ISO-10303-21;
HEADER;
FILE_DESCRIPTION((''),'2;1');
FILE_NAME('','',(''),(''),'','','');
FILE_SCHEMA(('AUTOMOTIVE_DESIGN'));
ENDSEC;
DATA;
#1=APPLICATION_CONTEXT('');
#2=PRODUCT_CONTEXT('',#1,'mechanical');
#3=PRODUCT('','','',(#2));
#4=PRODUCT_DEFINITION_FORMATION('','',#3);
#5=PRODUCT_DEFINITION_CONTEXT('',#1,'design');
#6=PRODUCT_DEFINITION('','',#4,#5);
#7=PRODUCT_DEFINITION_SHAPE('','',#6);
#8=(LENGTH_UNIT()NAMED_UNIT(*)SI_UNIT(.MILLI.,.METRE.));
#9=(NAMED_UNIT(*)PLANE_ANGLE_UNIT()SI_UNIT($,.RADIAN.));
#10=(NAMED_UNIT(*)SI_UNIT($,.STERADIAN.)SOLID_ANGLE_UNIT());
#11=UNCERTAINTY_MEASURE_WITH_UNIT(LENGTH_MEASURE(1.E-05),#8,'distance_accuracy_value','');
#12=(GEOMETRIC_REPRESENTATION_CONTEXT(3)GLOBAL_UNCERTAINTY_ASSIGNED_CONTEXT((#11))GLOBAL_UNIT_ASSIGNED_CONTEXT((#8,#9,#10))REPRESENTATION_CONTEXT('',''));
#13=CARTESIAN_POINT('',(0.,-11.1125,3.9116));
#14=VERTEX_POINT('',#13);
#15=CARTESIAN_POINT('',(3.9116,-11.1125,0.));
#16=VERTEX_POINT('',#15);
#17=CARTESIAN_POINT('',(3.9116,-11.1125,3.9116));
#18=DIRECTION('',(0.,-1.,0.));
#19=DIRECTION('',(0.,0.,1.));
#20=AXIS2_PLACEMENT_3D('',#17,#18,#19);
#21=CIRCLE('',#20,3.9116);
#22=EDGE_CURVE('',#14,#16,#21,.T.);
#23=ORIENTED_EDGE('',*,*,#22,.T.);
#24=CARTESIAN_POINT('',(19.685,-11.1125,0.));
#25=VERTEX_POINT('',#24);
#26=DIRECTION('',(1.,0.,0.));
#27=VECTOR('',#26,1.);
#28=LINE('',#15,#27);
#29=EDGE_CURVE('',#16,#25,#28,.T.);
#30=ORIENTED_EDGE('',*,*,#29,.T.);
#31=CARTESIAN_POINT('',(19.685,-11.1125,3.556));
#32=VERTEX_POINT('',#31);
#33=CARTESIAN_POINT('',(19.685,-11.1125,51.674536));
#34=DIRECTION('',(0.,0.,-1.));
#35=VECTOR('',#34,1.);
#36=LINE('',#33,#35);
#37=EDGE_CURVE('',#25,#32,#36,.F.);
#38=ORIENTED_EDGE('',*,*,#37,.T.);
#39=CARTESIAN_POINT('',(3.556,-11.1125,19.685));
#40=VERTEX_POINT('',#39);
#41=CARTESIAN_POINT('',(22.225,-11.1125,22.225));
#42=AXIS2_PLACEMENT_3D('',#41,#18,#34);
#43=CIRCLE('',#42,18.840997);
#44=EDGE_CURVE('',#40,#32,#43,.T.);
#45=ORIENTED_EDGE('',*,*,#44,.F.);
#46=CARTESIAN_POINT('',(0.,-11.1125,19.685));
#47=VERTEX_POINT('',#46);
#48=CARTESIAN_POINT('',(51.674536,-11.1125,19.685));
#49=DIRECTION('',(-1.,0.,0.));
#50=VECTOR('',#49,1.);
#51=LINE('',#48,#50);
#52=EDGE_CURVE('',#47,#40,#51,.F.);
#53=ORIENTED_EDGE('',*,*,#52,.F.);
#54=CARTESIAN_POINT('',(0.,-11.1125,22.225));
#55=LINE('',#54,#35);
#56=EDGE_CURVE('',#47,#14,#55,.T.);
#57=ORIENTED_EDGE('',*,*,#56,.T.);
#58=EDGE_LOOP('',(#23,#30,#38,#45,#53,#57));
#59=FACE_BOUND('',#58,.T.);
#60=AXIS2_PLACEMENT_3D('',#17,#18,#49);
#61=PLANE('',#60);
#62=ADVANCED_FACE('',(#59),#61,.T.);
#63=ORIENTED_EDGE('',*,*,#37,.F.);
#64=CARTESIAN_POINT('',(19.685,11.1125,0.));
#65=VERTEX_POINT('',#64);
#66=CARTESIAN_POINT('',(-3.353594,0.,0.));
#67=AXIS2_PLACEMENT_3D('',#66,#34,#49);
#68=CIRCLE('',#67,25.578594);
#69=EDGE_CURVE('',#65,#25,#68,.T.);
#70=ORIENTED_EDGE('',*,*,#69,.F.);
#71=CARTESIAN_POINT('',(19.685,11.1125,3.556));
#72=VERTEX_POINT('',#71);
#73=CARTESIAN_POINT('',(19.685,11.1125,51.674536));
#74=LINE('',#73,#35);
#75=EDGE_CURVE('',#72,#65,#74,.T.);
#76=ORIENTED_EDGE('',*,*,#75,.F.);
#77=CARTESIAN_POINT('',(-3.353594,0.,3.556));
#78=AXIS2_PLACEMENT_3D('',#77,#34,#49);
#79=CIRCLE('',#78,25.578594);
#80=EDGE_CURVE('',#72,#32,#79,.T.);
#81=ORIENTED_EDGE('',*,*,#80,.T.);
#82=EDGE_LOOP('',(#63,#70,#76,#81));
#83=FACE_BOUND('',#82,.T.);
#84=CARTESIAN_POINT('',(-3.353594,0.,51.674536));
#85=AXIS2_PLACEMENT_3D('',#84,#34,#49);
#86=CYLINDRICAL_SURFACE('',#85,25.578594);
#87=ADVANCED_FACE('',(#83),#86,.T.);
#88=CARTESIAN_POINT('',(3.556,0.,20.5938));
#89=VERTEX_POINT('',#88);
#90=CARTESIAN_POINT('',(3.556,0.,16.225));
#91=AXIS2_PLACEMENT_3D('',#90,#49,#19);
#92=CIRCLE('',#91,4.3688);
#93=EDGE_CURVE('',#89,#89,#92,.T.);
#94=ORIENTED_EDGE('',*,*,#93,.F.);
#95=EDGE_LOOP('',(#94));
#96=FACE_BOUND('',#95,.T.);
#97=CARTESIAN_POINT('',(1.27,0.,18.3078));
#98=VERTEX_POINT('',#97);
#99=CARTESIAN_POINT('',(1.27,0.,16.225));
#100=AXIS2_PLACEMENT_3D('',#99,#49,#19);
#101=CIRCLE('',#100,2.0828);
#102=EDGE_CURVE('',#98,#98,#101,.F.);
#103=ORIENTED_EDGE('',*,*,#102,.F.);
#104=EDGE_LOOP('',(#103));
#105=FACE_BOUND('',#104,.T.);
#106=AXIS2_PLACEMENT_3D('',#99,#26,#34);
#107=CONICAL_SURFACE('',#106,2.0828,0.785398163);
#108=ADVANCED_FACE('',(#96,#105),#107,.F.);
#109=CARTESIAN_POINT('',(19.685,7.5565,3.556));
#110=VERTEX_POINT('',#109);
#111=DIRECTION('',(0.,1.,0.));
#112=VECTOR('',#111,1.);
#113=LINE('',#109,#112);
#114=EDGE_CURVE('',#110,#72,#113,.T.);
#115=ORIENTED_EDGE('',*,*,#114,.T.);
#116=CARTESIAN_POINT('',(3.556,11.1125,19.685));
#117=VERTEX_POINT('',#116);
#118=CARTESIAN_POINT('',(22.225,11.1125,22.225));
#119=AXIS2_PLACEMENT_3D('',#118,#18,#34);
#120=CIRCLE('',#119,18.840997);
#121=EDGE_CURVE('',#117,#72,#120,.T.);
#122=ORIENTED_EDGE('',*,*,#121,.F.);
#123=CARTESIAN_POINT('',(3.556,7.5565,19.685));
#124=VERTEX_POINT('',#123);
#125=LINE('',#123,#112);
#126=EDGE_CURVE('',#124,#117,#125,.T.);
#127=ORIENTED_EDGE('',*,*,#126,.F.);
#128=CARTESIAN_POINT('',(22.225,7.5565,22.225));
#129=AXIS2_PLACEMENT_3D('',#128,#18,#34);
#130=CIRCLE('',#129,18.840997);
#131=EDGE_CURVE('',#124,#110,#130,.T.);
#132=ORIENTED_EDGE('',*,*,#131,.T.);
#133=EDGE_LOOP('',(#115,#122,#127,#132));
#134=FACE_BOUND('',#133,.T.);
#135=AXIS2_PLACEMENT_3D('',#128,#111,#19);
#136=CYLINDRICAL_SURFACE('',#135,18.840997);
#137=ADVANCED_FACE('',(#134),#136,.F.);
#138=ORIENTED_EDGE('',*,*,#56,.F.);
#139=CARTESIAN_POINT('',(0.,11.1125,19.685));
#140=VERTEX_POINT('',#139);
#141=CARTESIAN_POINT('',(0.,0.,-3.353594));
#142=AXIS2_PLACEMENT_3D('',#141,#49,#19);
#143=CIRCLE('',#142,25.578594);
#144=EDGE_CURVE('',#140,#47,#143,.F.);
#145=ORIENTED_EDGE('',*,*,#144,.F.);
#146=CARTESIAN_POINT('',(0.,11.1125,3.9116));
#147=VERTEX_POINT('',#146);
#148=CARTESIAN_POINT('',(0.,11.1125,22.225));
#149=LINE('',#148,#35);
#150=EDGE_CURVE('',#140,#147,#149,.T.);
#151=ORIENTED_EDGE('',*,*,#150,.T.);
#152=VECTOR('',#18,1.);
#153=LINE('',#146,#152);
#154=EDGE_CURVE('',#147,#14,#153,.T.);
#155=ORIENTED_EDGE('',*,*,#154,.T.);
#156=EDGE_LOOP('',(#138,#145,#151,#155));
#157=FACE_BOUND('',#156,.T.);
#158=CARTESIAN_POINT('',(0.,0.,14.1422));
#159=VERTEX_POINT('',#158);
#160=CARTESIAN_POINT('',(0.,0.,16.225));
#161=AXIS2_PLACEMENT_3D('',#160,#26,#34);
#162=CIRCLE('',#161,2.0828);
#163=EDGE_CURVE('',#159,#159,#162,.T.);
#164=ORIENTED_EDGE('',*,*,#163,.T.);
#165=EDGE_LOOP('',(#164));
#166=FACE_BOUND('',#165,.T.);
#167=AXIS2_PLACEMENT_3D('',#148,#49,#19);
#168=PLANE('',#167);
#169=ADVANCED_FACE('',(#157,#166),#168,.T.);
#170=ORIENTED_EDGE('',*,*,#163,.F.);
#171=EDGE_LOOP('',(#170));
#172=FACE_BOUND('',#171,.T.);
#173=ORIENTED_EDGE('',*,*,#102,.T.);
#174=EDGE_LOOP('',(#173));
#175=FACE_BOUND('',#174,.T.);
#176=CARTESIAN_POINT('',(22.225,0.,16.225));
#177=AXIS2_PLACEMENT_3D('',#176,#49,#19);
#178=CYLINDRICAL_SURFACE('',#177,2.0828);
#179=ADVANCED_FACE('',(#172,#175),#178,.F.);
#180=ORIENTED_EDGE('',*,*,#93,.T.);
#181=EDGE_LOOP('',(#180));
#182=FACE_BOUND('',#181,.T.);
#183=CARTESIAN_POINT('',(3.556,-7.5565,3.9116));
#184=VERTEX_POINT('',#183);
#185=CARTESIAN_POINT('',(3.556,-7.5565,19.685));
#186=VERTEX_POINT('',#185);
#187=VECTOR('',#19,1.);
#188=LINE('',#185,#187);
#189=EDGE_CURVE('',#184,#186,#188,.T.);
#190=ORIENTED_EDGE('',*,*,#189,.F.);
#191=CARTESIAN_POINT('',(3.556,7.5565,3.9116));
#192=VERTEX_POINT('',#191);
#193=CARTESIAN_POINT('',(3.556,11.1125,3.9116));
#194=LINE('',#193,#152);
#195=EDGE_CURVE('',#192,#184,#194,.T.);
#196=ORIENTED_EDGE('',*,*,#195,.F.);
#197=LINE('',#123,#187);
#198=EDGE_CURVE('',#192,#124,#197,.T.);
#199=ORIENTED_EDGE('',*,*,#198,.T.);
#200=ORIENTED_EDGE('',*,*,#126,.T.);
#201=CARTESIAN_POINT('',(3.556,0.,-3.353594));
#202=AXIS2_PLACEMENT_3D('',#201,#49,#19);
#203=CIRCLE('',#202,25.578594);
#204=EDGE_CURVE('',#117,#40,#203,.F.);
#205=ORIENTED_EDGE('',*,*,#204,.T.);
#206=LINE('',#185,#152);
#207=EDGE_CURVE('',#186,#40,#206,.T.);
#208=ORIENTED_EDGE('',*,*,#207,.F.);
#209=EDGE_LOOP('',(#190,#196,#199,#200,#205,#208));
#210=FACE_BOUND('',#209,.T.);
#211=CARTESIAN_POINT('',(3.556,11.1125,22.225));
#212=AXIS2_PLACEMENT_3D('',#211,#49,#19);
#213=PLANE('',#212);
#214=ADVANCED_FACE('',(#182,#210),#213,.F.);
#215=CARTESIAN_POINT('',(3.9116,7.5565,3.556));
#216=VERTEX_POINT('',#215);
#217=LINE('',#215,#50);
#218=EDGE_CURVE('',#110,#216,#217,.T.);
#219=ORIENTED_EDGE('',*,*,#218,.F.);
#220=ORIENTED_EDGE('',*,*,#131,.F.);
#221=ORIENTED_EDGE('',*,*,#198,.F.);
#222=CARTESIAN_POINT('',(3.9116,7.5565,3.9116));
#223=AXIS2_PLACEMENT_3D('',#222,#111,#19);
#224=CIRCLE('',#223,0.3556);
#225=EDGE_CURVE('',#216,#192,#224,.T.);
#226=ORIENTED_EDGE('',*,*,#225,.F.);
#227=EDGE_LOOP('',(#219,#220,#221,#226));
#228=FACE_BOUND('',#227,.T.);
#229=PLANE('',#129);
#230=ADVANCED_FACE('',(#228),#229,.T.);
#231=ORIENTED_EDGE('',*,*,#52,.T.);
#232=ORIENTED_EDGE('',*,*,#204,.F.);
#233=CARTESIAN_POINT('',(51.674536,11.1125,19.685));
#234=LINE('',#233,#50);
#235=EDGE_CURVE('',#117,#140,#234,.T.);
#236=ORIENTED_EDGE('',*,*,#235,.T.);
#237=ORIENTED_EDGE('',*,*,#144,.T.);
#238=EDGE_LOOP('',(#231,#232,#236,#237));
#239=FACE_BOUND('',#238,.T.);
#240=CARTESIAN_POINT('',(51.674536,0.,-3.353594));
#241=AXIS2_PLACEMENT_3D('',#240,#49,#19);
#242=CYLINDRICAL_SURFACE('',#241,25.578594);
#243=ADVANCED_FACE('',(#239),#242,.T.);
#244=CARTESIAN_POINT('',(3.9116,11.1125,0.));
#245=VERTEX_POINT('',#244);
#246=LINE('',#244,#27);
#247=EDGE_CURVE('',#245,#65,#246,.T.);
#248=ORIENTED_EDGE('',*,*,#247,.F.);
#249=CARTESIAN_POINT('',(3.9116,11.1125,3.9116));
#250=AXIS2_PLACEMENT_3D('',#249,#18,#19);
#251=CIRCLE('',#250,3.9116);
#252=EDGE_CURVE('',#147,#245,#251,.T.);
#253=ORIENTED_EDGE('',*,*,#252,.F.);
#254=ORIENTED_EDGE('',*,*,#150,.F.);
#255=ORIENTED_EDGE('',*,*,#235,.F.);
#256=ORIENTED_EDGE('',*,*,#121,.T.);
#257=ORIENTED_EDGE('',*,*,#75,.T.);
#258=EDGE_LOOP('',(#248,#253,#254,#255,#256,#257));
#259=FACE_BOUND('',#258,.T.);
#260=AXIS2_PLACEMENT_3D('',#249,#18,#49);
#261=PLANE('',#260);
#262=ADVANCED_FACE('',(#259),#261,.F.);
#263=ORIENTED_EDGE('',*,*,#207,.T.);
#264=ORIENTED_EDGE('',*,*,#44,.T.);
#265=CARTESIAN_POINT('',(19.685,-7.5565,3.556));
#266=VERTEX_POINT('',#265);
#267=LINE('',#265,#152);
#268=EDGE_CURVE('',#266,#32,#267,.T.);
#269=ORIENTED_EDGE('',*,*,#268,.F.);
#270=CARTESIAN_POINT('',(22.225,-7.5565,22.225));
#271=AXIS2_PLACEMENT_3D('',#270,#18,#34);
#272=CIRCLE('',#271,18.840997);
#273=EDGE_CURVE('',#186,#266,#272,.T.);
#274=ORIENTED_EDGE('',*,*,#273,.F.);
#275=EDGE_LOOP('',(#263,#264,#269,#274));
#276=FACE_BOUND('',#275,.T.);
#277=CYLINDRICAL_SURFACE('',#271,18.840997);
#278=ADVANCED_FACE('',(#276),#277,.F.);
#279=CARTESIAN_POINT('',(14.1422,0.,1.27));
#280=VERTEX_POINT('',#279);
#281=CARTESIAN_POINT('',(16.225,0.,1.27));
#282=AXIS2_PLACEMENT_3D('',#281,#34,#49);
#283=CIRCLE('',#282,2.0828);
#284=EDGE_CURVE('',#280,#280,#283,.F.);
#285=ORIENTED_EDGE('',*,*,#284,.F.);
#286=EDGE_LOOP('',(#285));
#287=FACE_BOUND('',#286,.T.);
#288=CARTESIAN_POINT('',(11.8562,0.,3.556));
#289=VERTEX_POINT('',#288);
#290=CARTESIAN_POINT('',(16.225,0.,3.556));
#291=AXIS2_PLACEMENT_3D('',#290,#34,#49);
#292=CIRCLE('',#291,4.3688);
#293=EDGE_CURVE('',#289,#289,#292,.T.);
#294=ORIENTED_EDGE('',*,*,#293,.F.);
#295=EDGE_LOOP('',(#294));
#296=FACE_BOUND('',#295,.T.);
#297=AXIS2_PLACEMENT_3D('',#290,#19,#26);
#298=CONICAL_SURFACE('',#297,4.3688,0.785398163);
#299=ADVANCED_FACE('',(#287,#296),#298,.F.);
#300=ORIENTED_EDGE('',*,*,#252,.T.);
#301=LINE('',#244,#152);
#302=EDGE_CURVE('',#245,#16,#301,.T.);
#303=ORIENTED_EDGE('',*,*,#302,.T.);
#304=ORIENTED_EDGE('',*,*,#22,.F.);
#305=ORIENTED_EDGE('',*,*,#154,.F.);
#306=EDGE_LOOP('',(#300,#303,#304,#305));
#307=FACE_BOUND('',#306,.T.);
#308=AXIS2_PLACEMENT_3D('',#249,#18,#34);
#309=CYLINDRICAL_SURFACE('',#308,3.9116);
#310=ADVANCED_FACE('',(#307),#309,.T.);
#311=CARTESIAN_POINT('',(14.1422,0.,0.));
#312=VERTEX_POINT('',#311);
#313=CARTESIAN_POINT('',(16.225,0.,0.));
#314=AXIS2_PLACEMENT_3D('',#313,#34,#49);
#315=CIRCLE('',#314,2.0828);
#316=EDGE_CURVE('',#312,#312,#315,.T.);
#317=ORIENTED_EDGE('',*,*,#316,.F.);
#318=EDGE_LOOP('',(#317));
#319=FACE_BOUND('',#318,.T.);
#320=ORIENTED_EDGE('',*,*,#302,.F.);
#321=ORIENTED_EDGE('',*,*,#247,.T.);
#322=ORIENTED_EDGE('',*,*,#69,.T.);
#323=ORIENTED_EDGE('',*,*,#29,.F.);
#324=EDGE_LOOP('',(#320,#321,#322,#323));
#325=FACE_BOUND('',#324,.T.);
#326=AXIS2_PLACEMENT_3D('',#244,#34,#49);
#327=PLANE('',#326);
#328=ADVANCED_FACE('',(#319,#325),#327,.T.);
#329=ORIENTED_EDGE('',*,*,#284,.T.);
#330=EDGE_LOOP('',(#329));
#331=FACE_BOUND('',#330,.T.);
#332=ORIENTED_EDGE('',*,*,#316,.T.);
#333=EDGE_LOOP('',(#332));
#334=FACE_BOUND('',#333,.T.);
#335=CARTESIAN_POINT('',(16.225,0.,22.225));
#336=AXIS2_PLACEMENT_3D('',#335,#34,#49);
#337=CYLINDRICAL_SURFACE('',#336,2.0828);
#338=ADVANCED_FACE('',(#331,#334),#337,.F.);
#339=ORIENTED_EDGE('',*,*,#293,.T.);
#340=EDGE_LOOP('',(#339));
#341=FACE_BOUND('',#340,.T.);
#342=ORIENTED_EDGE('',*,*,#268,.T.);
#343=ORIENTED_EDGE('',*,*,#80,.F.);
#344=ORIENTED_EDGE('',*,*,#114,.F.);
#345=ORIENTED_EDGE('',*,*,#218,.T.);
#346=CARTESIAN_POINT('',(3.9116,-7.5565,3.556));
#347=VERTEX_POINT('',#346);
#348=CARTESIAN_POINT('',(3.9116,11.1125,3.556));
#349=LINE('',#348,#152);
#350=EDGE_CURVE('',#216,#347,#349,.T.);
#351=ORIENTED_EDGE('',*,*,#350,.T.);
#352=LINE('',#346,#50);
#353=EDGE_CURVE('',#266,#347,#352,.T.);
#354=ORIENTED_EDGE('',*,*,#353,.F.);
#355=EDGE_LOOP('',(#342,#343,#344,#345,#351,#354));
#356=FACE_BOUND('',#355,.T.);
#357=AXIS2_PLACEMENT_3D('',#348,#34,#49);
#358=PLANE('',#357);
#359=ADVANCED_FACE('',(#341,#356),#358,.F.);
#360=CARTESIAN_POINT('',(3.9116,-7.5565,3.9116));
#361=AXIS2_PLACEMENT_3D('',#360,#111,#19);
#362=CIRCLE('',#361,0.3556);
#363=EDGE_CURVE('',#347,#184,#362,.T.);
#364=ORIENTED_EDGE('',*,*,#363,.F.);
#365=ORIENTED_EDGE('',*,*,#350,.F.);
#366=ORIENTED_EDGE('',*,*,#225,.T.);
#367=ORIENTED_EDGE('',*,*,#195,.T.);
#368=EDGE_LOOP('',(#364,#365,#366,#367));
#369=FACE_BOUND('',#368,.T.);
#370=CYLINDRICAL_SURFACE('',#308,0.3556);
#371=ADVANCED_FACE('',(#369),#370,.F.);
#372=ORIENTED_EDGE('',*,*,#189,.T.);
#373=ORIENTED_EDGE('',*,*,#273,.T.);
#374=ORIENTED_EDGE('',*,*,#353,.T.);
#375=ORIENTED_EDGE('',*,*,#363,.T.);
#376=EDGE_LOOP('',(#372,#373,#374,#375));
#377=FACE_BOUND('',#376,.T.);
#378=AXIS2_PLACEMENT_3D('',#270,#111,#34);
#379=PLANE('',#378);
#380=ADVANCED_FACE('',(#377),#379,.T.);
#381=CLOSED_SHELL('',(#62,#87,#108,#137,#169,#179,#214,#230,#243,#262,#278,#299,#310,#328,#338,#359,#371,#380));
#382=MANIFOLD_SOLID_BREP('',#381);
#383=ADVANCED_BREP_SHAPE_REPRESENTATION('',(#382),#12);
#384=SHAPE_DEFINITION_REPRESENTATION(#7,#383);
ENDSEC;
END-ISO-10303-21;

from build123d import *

# Parameters (mm, degrees)
EXTRUDE_THIN1_START = -11.1125
EXTRUDE_THIN1_DEPTH = 22.225
EXTRUDE4_START      = -3.556
EXTRUDE4_DEPTH      = 3.556
SKETCH4_R           = 2.0828
CUT_EXTRUDE1_DEPTH  = 34.3375
CUT_EXTRUDE2_DEPTH  = 32.080055377
CHAMFER1_SIZE       = 2.286


# Read off the part's stored shape, not the designer's step: Extrude-Thin1
with BuildPart() as part:
    # Extrude-Thin1 outline → Extrude-Thin1 (new body)
    with BuildSketch(Plane(origin=(0, 0, 0), x_dir=(1, 0, 0), z_dir=(0, 1, 0)).offset(EXTRUDE_THIN1_START)):
        with BuildLine():
            Line((3.9116, -3.556), (22.225, -3.556))
            Line((22.225, -3.556), (22.225, 0))
            Line((22.225, 0), (3.9116, 0))
            ThreePointArc((3.9116, 0), (1.145681115, -1.145681115), (0, -3.9116))
            Line((0, -3.9116), (0, -22.225))
            Line((0, -22.225), (3.556, -22.225))
            Line((3.556, -22.225), (3.556, -3.9116))
            ThreePointArc((3.556, -3.9116), (3.660152829, -3.660152829), (3.9116, -3.556))
        make_face()
    extrude(amount=EXTRUDE_THIN1_DEPTH)

    # Sketch5 → Extrude4 (add)
    with BuildSketch(Plane(origin=(0, 11.1125, 0), x_dir=(1, 0, 0), z_dir=(0, 1, 0)).offset(EXTRUDE4_START)):
        with BuildLine():
            Line((3.9116, -3.556), (19.685, -3.556))
            ThreePointArc((19.685, -3.556), (8.902403387, -8.902403387), (3.556, -19.685))
            Line((3.556, -19.685), (3.556, -3.9116))
            ThreePointArc((3.556, -3.9116), (3.660152829, -3.660152829), (3.9116, -3.556))
        make_face()
    extrude4 = extrude(amount=EXTRUDE4_DEPTH)

    # Mirror2: Extrude4 across plane
    add(extrude4.mirror(Plane.ZX))

    # Sketch4 → Cut-Extrude1 (cut, through all)
    with BuildSketch(Plane(origin=(0, 0, 0), x_dir=(0, 0, -1), z_dir=(1, 0, 0))):
        with Locations(Location((-16.225, 0, 0), (0, 0, 180))):
            Circle(SKETCH4_R)
    cut_extrude1 = extrude(amount=CUT_EXTRUDE1_DEPTH, mode=Mode.SUBTRACT)

    # Sketch6 → Cut-Extrude2 (cut, symmetric)
    with BuildSketch(Plane(origin=(3.556, 0, 0), x_dir=(0, 0, -1), z_dir=(1, 0, 0))):
        with BuildLine():
            Line((10.456138589, 73.60153911), (-19.685, 11.1125))
            ThreePointArc((-19.685, 11.1125), (-22.225, 0), (-19.685, -11.1125))
            Line((-19.685, -11.1125), (10.456138589, -73.60153911))
            Line((10.456138589, -73.60153911), (-128.300745843, -73.60153911))
            Line((-128.300745843, -73.60153911), (-128.300745843, 73.60153911))
            Line((-128.300745843, 73.60153911), (10.456138589, 73.60153911))
        make_face()
    cut_extrude2 = extrude(amount=CUT_EXTRUDE2_DEPTH, both=True, mode=Mode.SUBTRACT)

    # Mirror3: Cut-Extrude1, Cut-Extrude2 across plane
    add(cut_extrude1.mirror(Plane(origin=(0, 0, 0), x_dir=(0.7071067811865465, 0, 0.7071067811865486), z_dir=(-0.7071067811865488, 0, 0.7071067811865464))), mode=Mode.SUBTRACT)
    add(cut_extrude2.mirror(Plane(origin=(0, 0, 0), x_dir=(0.7071067811865465, 0, 0.7071067811865486), z_dir=(-0.7071067811865488, 0, 0.7071067811865464))), mode=Mode.SUBTRACT)

    # Chamfer1
    chamfer1_edges = [part.edges().sort_by_distance(p)[0] for p in [
        (3.556, 0, 14.1422),
        (14.1422, 0, 3.556),
    ]]
    chamfer(chamfer1_edges, length=CHAMFER1_SIZE)


solid = part.part
